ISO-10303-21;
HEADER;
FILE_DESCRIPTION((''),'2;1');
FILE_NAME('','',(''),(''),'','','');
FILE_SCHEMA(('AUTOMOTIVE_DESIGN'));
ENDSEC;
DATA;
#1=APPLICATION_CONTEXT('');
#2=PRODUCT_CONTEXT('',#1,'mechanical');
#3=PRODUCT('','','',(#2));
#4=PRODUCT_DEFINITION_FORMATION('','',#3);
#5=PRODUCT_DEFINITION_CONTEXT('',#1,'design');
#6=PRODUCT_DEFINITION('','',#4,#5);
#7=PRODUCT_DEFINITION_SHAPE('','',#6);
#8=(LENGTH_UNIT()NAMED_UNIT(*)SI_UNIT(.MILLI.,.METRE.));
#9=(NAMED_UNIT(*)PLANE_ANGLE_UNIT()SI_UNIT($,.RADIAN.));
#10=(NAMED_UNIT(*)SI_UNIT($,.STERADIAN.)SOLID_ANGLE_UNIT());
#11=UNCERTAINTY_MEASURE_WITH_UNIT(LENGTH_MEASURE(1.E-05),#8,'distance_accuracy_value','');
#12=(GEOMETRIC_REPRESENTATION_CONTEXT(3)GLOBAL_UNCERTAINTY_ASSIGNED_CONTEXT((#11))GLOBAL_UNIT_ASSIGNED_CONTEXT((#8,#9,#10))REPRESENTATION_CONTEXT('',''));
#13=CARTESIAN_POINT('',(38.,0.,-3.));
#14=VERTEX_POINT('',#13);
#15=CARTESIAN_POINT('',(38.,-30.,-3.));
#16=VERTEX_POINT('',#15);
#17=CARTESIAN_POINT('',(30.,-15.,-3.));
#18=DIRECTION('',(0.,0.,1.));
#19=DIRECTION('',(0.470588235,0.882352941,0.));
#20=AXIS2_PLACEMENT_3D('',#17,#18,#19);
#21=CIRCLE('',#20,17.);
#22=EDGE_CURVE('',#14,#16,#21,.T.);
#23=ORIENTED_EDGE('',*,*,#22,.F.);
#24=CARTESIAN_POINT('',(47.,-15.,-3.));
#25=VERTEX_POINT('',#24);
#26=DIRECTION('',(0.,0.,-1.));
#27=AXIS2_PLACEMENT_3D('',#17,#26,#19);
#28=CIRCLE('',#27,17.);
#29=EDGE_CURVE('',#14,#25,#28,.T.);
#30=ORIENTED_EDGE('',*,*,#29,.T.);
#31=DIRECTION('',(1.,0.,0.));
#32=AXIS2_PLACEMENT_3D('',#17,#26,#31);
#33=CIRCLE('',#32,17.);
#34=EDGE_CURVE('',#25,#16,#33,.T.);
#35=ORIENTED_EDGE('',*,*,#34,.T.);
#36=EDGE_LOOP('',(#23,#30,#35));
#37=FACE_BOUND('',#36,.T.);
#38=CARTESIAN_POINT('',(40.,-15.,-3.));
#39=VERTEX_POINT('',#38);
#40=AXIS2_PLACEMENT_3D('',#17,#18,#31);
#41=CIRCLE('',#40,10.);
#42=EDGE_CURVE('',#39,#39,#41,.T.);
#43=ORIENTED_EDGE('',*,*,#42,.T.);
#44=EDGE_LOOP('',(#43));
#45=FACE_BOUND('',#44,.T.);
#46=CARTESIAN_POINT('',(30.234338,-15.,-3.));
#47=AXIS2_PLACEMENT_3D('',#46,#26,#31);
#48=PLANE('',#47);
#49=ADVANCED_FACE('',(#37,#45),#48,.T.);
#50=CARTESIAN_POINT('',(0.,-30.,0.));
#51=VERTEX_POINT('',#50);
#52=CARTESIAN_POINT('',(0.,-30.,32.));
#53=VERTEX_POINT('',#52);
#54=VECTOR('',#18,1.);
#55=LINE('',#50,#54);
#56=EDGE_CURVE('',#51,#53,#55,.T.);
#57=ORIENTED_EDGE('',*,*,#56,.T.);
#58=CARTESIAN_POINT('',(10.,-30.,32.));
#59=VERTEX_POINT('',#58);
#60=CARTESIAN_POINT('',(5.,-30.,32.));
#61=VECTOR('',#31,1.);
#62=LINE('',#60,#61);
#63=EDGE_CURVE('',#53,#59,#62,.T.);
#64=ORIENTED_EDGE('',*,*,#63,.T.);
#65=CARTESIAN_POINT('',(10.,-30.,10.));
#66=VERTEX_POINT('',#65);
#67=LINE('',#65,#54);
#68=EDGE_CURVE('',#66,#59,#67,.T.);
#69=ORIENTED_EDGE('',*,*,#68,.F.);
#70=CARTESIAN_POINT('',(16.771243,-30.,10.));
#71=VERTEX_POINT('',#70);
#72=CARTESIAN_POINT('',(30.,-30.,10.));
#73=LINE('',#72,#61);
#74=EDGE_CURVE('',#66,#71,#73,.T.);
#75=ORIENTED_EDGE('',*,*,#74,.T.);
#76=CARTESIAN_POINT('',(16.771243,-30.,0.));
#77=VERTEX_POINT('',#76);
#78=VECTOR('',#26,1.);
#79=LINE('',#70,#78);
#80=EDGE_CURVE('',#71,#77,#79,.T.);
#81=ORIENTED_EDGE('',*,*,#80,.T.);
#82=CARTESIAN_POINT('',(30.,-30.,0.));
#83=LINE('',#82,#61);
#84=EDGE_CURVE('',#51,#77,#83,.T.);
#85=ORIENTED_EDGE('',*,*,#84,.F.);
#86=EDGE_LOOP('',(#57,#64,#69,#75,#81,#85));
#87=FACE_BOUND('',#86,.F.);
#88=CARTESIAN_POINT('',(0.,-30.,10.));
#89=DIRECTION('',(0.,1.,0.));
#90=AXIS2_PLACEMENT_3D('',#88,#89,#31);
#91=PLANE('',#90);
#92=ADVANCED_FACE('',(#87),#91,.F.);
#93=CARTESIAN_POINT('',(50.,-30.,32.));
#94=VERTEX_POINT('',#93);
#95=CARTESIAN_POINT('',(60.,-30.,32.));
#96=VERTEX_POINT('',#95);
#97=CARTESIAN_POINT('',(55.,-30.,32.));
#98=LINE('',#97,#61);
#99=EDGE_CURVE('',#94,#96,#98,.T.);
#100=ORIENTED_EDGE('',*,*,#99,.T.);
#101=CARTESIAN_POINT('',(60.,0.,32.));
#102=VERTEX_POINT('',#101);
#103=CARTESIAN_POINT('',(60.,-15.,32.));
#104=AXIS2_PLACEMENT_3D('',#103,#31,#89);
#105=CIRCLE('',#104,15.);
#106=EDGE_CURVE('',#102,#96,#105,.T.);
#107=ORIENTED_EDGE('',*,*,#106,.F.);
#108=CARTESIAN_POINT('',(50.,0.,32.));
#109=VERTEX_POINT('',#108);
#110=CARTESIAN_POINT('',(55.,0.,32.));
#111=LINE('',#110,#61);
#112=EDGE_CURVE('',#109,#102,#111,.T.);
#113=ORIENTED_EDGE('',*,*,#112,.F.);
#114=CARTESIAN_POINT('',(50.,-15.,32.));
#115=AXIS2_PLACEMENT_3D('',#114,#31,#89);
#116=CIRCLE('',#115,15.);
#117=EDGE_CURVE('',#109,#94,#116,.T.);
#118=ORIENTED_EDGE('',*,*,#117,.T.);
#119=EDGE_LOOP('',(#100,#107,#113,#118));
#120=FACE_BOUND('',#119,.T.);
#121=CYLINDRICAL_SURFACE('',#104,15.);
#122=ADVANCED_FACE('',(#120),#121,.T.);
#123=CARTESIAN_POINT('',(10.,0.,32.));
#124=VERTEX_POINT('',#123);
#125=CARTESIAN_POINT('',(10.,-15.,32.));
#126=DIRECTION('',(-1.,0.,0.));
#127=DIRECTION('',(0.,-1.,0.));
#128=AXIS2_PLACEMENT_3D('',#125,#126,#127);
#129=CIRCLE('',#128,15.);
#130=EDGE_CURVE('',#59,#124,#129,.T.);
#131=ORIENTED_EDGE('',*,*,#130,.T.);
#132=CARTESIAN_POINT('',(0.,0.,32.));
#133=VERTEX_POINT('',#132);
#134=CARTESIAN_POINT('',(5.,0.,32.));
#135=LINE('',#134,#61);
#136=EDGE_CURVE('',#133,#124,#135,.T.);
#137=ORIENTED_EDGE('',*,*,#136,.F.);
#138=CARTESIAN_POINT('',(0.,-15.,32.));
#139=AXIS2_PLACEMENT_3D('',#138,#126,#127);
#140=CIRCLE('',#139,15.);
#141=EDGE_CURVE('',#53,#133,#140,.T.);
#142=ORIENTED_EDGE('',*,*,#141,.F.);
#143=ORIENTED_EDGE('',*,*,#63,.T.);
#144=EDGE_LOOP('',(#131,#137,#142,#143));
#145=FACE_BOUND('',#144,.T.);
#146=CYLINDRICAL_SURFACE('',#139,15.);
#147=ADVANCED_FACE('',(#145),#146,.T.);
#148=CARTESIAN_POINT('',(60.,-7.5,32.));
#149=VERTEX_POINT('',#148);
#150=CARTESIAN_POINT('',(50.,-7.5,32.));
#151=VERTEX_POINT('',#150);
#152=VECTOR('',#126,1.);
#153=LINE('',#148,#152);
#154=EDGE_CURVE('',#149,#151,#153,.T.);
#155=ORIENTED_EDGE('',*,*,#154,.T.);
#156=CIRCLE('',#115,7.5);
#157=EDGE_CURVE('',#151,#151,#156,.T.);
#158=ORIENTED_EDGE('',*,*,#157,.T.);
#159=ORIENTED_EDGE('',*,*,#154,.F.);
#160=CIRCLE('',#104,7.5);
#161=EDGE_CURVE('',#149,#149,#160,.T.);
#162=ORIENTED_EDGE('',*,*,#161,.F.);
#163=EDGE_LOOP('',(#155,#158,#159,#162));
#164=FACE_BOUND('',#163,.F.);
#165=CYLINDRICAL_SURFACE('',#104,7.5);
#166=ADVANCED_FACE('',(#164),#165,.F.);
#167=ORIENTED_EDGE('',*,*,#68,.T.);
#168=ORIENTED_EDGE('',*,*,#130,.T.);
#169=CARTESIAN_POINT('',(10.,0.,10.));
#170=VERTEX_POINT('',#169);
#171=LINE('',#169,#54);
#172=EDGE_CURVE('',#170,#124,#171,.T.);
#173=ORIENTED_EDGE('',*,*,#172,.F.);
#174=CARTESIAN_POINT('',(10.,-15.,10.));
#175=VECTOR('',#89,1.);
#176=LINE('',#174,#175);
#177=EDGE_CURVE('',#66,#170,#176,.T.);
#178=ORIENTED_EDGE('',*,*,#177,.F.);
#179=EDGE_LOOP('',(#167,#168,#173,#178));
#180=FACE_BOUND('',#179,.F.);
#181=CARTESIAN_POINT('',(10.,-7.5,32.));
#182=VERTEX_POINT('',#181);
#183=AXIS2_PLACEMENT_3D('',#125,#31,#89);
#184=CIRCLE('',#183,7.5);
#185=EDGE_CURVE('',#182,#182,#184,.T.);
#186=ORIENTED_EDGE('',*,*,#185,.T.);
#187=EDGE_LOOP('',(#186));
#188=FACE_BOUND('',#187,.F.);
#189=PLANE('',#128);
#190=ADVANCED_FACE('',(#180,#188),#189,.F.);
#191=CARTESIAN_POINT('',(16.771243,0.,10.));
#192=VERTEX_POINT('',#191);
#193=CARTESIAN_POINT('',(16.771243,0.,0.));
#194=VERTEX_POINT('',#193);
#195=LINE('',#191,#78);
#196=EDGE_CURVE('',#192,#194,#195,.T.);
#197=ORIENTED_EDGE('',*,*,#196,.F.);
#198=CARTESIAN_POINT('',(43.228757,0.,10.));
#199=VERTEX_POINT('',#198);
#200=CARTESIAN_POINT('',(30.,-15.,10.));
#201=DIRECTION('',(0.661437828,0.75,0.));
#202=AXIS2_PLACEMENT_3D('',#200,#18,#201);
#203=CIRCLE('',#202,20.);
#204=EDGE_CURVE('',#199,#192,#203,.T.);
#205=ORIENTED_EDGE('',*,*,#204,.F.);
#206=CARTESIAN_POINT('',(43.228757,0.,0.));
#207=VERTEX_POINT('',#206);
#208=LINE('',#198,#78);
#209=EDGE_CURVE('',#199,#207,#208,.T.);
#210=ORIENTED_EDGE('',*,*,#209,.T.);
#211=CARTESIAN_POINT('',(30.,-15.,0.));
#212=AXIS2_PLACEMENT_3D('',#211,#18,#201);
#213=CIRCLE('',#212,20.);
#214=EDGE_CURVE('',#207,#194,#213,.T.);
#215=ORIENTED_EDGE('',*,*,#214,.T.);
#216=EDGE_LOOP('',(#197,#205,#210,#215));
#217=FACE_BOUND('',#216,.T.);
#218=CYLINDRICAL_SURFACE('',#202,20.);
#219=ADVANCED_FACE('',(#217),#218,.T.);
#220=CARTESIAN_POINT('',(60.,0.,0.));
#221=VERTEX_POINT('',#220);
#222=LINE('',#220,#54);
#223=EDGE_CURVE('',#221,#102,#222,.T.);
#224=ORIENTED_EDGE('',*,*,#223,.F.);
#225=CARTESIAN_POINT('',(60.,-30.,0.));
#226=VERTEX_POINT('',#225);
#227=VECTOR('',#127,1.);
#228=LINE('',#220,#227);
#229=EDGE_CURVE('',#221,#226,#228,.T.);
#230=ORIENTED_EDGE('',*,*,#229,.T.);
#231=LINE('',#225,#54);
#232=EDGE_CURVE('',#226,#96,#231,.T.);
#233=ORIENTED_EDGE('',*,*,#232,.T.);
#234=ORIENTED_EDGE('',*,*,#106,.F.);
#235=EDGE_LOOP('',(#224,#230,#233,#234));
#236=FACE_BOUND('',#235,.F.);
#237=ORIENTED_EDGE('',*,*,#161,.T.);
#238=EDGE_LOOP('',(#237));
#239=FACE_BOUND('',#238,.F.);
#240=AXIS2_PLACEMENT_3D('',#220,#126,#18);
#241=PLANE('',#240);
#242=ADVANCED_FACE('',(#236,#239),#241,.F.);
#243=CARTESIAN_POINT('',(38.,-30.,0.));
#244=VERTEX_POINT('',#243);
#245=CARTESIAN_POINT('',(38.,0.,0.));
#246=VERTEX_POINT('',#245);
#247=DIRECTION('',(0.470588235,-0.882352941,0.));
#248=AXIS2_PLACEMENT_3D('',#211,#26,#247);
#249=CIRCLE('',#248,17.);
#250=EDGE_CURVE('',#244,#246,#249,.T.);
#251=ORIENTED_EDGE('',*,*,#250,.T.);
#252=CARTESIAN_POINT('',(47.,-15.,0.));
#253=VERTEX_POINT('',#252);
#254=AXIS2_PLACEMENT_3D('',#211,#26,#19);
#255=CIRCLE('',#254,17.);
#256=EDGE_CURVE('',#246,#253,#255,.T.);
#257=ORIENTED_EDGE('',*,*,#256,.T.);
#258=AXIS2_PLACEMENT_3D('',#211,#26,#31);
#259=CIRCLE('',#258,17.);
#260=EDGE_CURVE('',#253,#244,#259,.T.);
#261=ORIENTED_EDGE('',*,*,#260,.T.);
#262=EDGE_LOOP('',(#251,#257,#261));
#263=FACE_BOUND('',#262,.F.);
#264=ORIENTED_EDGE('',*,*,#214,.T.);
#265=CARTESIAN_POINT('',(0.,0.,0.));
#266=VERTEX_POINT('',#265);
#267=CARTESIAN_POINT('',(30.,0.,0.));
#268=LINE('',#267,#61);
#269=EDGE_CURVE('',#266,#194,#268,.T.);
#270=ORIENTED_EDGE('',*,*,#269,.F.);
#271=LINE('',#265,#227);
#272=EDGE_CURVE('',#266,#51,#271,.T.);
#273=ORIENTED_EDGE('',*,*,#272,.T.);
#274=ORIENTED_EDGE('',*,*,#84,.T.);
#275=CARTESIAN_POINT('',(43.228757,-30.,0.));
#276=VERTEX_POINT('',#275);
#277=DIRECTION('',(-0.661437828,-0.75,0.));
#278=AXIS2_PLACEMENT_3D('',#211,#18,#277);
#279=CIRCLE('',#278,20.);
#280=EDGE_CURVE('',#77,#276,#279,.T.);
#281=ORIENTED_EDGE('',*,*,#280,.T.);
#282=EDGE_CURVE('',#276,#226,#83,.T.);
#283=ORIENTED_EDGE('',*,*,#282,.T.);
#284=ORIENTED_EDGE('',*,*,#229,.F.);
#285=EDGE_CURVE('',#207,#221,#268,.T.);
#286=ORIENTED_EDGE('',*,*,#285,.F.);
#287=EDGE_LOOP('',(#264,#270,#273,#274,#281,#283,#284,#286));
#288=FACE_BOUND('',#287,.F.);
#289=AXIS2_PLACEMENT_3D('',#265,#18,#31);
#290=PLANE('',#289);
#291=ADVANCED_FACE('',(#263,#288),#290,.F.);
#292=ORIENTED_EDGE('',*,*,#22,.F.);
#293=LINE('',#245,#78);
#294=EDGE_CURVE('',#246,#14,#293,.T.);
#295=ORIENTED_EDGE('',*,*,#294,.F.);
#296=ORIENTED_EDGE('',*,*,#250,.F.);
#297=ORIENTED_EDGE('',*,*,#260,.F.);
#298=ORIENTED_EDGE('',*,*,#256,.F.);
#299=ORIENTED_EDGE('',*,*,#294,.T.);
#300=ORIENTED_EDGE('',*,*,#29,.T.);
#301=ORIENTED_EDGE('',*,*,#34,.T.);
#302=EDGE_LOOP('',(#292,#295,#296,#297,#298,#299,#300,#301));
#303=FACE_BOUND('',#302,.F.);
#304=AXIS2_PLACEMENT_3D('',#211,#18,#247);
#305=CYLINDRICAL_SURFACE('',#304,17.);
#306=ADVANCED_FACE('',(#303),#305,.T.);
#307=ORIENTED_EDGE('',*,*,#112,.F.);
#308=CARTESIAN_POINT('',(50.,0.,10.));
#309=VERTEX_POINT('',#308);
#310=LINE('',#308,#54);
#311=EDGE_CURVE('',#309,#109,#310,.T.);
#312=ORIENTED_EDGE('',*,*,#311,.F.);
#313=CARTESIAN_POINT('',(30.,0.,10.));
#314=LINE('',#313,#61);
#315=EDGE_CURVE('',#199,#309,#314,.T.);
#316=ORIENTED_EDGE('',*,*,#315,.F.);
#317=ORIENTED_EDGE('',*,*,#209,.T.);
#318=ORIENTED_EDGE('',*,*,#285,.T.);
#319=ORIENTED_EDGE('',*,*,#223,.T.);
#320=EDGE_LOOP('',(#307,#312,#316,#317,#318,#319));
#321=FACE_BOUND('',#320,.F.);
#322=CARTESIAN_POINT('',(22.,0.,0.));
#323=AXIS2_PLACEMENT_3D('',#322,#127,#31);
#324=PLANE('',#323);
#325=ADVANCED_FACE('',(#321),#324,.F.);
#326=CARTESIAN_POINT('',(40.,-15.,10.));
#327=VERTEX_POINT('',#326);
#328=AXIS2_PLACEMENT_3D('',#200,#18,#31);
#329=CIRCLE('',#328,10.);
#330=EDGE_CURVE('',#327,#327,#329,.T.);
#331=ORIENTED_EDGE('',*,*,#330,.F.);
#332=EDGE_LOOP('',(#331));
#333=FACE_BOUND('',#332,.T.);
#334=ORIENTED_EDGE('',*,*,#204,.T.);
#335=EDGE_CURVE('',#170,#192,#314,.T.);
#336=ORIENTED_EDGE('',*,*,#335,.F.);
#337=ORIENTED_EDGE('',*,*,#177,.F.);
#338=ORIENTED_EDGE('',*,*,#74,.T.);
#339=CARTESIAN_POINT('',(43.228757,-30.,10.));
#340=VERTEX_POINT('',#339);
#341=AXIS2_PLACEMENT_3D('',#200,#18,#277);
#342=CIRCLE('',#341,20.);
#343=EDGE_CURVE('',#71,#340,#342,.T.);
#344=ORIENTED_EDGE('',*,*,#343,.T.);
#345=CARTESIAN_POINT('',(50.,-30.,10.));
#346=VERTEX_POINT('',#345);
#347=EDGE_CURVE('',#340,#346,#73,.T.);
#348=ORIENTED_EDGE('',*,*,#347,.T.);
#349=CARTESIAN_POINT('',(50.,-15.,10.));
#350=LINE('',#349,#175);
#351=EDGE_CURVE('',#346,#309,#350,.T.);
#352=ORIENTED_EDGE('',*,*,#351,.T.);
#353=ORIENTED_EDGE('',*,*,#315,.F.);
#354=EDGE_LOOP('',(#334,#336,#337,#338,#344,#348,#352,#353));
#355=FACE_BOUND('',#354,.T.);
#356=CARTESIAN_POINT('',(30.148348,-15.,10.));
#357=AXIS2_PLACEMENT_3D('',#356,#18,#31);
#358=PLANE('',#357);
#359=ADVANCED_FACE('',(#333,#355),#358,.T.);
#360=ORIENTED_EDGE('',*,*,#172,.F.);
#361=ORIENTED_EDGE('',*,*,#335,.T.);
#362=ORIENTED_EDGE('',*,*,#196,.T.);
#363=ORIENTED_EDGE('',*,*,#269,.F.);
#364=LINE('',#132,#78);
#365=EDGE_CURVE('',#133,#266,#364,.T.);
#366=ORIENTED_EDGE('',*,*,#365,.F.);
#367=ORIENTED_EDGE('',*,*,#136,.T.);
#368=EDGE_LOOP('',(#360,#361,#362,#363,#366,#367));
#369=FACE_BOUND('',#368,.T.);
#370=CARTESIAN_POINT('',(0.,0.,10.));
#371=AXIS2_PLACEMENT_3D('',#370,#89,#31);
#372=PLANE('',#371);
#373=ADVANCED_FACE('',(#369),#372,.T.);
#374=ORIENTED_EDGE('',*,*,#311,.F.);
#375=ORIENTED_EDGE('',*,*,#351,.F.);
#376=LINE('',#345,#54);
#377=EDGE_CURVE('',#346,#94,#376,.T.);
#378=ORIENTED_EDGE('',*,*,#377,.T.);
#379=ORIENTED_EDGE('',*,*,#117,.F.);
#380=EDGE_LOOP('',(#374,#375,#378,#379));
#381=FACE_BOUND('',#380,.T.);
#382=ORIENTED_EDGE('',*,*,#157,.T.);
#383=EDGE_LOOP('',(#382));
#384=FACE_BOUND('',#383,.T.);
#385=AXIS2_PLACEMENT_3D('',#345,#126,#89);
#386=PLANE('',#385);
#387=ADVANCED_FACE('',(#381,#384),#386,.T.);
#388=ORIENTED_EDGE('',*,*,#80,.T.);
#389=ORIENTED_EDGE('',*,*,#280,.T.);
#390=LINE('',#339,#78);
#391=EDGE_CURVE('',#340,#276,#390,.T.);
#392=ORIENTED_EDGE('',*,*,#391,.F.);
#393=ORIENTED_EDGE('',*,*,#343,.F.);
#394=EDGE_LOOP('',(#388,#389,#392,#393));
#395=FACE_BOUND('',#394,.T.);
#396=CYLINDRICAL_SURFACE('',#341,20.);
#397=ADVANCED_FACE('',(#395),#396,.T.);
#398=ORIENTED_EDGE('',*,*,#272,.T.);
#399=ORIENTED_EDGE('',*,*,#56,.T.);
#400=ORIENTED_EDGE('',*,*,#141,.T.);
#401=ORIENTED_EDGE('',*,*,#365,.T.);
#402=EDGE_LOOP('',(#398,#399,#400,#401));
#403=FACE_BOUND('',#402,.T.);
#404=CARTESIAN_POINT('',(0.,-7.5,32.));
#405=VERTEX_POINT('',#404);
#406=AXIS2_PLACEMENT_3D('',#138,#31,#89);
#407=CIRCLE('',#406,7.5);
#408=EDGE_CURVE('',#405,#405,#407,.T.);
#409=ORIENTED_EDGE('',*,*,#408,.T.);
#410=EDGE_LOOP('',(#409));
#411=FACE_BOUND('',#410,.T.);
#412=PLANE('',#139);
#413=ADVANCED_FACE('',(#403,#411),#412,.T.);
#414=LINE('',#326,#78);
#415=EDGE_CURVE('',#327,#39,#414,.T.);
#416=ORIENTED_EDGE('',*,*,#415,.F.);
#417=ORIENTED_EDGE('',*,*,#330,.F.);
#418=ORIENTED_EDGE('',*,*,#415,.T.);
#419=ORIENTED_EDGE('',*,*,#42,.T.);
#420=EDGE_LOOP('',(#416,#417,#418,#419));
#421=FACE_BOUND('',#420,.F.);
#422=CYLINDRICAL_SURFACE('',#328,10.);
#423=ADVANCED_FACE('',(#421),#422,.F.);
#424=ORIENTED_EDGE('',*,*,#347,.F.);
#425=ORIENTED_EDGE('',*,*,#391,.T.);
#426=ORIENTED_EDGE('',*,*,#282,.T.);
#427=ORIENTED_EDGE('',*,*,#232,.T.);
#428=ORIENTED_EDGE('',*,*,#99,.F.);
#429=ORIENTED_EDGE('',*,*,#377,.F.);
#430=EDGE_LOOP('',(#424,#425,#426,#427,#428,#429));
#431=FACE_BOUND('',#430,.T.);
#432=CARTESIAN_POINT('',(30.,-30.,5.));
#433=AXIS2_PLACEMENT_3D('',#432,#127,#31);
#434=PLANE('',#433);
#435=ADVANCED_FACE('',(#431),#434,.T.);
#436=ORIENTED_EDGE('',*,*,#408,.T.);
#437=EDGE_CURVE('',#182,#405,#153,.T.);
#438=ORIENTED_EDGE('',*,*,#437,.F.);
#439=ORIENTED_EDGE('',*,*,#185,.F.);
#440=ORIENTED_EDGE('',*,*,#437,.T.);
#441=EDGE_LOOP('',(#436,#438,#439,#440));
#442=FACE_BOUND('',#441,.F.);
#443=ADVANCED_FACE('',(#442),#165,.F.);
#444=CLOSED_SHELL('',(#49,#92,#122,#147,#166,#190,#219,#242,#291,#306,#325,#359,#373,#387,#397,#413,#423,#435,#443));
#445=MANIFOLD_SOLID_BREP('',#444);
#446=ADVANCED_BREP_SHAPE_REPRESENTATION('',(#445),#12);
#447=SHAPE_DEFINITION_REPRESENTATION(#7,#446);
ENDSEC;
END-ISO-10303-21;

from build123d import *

# Parameters (mm, degrees)
F0_W      = 60
F0_H      = 10
F1_DEPTH  = 30
F3_DEPTH  = 3
F5_DEPTH  = 10
F6_R      = 10
F7_DEPTH  = 25
F8_R      = 10
F9_DEPTH  = 3
F10_W     = 10
F10_H     = 30
F11_DEPTH = 22
F12_R     = 15
F13_DEPTH = 10
F14_R     = 15
F15_DEPTH = 10
F16_R     = 7.5
F17_DEPTH = 60


with BuildPart() as f1:
    # F0 (on Front) → F1 (new body)
    with BuildSketch(Plane.XZ):
        with Locations((30, 5)):
            Rectangle(F0_W, F0_H)
    extrude(amount=F1_DEPTH)

    # F2 (on face) → F3 (join)
    with BuildSketch(Plane(origin=(0, 0, 0), x_dir=(1, 0, 0), z_dir=(0, 0, -1))):
        with BuildLine():
            ThreePointArc((22, 30), (13, 15), (22, 0))
            Line((22, 0), (38, 0))
            ThreePointArc((38, 0), (44.5773797371, 6.2535721577), (47, 15))
            ThreePointArc((47, 15), (44.5773797371, 23.7464278423), (38, 30))
            Line((38, 30), (22, 30))
        make_face()
        with BuildLine():
            ThreePointArc((38, 30), (30, 32), (22, 30))
            Line((22, 30), (38, 30))
        make_face()
    extrude(amount=F3_DEPTH)

    # F4 (on face) → F5 (join)
    with BuildSketch(Plane.XY.offset(10)):
        with BuildLine():
            ThreePointArc((43.2287565553, -30), (48.2287565553, -23.2287565553), (50, -15))
            ThreePointArc((50, -15), (48.2287565553, -6.7712434447), (43.2287565553, 0))
            Line((43.2287565553, 0), (16.7712434447, 0))
            ThreePointArc((16.7712434447, 0), (10, -15), (16.7712434447, -30))
            Line((16.7712434447, -30), (43.2287565553, -30))
        make_face()
        with BuildLine():
            Line((16.7712434447, 0), (43.2287565553, 0))
            ThreePointArc((43.2287565553, 0), (30, 5), (16.7712434447, 0))
        make_face()
        with BuildLine():
            ThreePointArc((16.7712434447, -30), (30, -35), (43.2287565553, -30))
            Line((43.2287565553, -30), (16.7712434447, -30))
        make_face()
    extrude(amount=-F5_DEPTH)

    # F6 (on face) → F7 (cut)
    with BuildSketch(Plane.XY.offset(10)):
        with Locations((30, -15)):
            Circle(F6_R)
    extrude(amount=-F7_DEPTH, mode=Mode.SUBTRACT)

    # F8 (on face) → F9 (join)
    with BuildSketch(Plane(origin=(0, 0, -3), x_dir=(1, 0, 0), z_dir=(0, 0, -1))):
        with BuildLine():
            ThreePointArc((38, 0), (44.5773797371, 6.2535721577), (47, 15))
            ThreePointArc((47, 15), (44.5773797371, 23.7464278423), (38, 30))
            Line((38, 30), (22, 30))
            ThreePointArc((22, 30), (13, 15), (22, 0))
            Line((22, 0), (38, 0))
        make_face()
        with Locations((30, 15)):
            Circle(F8_R, mode=Mode.SUBTRACT)
        with BuildLine():
            ThreePointArc((22, 0), (30, -2), (38, 0))
            Line((38, 0), (22, 0))
        make_face()
    extrude(amount=-F9_DEPTH)

    # F10 (on face) → F11 (join)
    with BuildSketch(Plane.XY.offset(10)):
        with Locations((5, -15)):
            Rectangle(F10_W, F10_H)
        with Locations((55, -15)):
            Rectangle(F10_W, F10_H)
    extrude(amount=F11_DEPTH)

    # F12 (on face) → F13 (join)
    with BuildSketch(Plane(origin=(0, 0, 0), x_dir=(0, -1, 0), z_dir=(-1, 0, 0))):
        with Locations((15, 32)):
            Circle(F12_R)
    extrude(amount=-F13_DEPTH)

    # F14 (on face) → F15 (join)
    with BuildSketch(Plane.YZ.offset(60)):
        with Locations((-15, 32)):
            Circle(F14_R)
    extrude(amount=-F15_DEPTH)

    # F16 (on face) → F17 (cut)
    with BuildSketch(Plane.YZ.offset(60)):
        with Locations((-15, 32)):
            Circle(F16_R)
    extrude(amount=-F17_DEPTH, mode=Mode.SUBTRACT)


solid = f1.part
